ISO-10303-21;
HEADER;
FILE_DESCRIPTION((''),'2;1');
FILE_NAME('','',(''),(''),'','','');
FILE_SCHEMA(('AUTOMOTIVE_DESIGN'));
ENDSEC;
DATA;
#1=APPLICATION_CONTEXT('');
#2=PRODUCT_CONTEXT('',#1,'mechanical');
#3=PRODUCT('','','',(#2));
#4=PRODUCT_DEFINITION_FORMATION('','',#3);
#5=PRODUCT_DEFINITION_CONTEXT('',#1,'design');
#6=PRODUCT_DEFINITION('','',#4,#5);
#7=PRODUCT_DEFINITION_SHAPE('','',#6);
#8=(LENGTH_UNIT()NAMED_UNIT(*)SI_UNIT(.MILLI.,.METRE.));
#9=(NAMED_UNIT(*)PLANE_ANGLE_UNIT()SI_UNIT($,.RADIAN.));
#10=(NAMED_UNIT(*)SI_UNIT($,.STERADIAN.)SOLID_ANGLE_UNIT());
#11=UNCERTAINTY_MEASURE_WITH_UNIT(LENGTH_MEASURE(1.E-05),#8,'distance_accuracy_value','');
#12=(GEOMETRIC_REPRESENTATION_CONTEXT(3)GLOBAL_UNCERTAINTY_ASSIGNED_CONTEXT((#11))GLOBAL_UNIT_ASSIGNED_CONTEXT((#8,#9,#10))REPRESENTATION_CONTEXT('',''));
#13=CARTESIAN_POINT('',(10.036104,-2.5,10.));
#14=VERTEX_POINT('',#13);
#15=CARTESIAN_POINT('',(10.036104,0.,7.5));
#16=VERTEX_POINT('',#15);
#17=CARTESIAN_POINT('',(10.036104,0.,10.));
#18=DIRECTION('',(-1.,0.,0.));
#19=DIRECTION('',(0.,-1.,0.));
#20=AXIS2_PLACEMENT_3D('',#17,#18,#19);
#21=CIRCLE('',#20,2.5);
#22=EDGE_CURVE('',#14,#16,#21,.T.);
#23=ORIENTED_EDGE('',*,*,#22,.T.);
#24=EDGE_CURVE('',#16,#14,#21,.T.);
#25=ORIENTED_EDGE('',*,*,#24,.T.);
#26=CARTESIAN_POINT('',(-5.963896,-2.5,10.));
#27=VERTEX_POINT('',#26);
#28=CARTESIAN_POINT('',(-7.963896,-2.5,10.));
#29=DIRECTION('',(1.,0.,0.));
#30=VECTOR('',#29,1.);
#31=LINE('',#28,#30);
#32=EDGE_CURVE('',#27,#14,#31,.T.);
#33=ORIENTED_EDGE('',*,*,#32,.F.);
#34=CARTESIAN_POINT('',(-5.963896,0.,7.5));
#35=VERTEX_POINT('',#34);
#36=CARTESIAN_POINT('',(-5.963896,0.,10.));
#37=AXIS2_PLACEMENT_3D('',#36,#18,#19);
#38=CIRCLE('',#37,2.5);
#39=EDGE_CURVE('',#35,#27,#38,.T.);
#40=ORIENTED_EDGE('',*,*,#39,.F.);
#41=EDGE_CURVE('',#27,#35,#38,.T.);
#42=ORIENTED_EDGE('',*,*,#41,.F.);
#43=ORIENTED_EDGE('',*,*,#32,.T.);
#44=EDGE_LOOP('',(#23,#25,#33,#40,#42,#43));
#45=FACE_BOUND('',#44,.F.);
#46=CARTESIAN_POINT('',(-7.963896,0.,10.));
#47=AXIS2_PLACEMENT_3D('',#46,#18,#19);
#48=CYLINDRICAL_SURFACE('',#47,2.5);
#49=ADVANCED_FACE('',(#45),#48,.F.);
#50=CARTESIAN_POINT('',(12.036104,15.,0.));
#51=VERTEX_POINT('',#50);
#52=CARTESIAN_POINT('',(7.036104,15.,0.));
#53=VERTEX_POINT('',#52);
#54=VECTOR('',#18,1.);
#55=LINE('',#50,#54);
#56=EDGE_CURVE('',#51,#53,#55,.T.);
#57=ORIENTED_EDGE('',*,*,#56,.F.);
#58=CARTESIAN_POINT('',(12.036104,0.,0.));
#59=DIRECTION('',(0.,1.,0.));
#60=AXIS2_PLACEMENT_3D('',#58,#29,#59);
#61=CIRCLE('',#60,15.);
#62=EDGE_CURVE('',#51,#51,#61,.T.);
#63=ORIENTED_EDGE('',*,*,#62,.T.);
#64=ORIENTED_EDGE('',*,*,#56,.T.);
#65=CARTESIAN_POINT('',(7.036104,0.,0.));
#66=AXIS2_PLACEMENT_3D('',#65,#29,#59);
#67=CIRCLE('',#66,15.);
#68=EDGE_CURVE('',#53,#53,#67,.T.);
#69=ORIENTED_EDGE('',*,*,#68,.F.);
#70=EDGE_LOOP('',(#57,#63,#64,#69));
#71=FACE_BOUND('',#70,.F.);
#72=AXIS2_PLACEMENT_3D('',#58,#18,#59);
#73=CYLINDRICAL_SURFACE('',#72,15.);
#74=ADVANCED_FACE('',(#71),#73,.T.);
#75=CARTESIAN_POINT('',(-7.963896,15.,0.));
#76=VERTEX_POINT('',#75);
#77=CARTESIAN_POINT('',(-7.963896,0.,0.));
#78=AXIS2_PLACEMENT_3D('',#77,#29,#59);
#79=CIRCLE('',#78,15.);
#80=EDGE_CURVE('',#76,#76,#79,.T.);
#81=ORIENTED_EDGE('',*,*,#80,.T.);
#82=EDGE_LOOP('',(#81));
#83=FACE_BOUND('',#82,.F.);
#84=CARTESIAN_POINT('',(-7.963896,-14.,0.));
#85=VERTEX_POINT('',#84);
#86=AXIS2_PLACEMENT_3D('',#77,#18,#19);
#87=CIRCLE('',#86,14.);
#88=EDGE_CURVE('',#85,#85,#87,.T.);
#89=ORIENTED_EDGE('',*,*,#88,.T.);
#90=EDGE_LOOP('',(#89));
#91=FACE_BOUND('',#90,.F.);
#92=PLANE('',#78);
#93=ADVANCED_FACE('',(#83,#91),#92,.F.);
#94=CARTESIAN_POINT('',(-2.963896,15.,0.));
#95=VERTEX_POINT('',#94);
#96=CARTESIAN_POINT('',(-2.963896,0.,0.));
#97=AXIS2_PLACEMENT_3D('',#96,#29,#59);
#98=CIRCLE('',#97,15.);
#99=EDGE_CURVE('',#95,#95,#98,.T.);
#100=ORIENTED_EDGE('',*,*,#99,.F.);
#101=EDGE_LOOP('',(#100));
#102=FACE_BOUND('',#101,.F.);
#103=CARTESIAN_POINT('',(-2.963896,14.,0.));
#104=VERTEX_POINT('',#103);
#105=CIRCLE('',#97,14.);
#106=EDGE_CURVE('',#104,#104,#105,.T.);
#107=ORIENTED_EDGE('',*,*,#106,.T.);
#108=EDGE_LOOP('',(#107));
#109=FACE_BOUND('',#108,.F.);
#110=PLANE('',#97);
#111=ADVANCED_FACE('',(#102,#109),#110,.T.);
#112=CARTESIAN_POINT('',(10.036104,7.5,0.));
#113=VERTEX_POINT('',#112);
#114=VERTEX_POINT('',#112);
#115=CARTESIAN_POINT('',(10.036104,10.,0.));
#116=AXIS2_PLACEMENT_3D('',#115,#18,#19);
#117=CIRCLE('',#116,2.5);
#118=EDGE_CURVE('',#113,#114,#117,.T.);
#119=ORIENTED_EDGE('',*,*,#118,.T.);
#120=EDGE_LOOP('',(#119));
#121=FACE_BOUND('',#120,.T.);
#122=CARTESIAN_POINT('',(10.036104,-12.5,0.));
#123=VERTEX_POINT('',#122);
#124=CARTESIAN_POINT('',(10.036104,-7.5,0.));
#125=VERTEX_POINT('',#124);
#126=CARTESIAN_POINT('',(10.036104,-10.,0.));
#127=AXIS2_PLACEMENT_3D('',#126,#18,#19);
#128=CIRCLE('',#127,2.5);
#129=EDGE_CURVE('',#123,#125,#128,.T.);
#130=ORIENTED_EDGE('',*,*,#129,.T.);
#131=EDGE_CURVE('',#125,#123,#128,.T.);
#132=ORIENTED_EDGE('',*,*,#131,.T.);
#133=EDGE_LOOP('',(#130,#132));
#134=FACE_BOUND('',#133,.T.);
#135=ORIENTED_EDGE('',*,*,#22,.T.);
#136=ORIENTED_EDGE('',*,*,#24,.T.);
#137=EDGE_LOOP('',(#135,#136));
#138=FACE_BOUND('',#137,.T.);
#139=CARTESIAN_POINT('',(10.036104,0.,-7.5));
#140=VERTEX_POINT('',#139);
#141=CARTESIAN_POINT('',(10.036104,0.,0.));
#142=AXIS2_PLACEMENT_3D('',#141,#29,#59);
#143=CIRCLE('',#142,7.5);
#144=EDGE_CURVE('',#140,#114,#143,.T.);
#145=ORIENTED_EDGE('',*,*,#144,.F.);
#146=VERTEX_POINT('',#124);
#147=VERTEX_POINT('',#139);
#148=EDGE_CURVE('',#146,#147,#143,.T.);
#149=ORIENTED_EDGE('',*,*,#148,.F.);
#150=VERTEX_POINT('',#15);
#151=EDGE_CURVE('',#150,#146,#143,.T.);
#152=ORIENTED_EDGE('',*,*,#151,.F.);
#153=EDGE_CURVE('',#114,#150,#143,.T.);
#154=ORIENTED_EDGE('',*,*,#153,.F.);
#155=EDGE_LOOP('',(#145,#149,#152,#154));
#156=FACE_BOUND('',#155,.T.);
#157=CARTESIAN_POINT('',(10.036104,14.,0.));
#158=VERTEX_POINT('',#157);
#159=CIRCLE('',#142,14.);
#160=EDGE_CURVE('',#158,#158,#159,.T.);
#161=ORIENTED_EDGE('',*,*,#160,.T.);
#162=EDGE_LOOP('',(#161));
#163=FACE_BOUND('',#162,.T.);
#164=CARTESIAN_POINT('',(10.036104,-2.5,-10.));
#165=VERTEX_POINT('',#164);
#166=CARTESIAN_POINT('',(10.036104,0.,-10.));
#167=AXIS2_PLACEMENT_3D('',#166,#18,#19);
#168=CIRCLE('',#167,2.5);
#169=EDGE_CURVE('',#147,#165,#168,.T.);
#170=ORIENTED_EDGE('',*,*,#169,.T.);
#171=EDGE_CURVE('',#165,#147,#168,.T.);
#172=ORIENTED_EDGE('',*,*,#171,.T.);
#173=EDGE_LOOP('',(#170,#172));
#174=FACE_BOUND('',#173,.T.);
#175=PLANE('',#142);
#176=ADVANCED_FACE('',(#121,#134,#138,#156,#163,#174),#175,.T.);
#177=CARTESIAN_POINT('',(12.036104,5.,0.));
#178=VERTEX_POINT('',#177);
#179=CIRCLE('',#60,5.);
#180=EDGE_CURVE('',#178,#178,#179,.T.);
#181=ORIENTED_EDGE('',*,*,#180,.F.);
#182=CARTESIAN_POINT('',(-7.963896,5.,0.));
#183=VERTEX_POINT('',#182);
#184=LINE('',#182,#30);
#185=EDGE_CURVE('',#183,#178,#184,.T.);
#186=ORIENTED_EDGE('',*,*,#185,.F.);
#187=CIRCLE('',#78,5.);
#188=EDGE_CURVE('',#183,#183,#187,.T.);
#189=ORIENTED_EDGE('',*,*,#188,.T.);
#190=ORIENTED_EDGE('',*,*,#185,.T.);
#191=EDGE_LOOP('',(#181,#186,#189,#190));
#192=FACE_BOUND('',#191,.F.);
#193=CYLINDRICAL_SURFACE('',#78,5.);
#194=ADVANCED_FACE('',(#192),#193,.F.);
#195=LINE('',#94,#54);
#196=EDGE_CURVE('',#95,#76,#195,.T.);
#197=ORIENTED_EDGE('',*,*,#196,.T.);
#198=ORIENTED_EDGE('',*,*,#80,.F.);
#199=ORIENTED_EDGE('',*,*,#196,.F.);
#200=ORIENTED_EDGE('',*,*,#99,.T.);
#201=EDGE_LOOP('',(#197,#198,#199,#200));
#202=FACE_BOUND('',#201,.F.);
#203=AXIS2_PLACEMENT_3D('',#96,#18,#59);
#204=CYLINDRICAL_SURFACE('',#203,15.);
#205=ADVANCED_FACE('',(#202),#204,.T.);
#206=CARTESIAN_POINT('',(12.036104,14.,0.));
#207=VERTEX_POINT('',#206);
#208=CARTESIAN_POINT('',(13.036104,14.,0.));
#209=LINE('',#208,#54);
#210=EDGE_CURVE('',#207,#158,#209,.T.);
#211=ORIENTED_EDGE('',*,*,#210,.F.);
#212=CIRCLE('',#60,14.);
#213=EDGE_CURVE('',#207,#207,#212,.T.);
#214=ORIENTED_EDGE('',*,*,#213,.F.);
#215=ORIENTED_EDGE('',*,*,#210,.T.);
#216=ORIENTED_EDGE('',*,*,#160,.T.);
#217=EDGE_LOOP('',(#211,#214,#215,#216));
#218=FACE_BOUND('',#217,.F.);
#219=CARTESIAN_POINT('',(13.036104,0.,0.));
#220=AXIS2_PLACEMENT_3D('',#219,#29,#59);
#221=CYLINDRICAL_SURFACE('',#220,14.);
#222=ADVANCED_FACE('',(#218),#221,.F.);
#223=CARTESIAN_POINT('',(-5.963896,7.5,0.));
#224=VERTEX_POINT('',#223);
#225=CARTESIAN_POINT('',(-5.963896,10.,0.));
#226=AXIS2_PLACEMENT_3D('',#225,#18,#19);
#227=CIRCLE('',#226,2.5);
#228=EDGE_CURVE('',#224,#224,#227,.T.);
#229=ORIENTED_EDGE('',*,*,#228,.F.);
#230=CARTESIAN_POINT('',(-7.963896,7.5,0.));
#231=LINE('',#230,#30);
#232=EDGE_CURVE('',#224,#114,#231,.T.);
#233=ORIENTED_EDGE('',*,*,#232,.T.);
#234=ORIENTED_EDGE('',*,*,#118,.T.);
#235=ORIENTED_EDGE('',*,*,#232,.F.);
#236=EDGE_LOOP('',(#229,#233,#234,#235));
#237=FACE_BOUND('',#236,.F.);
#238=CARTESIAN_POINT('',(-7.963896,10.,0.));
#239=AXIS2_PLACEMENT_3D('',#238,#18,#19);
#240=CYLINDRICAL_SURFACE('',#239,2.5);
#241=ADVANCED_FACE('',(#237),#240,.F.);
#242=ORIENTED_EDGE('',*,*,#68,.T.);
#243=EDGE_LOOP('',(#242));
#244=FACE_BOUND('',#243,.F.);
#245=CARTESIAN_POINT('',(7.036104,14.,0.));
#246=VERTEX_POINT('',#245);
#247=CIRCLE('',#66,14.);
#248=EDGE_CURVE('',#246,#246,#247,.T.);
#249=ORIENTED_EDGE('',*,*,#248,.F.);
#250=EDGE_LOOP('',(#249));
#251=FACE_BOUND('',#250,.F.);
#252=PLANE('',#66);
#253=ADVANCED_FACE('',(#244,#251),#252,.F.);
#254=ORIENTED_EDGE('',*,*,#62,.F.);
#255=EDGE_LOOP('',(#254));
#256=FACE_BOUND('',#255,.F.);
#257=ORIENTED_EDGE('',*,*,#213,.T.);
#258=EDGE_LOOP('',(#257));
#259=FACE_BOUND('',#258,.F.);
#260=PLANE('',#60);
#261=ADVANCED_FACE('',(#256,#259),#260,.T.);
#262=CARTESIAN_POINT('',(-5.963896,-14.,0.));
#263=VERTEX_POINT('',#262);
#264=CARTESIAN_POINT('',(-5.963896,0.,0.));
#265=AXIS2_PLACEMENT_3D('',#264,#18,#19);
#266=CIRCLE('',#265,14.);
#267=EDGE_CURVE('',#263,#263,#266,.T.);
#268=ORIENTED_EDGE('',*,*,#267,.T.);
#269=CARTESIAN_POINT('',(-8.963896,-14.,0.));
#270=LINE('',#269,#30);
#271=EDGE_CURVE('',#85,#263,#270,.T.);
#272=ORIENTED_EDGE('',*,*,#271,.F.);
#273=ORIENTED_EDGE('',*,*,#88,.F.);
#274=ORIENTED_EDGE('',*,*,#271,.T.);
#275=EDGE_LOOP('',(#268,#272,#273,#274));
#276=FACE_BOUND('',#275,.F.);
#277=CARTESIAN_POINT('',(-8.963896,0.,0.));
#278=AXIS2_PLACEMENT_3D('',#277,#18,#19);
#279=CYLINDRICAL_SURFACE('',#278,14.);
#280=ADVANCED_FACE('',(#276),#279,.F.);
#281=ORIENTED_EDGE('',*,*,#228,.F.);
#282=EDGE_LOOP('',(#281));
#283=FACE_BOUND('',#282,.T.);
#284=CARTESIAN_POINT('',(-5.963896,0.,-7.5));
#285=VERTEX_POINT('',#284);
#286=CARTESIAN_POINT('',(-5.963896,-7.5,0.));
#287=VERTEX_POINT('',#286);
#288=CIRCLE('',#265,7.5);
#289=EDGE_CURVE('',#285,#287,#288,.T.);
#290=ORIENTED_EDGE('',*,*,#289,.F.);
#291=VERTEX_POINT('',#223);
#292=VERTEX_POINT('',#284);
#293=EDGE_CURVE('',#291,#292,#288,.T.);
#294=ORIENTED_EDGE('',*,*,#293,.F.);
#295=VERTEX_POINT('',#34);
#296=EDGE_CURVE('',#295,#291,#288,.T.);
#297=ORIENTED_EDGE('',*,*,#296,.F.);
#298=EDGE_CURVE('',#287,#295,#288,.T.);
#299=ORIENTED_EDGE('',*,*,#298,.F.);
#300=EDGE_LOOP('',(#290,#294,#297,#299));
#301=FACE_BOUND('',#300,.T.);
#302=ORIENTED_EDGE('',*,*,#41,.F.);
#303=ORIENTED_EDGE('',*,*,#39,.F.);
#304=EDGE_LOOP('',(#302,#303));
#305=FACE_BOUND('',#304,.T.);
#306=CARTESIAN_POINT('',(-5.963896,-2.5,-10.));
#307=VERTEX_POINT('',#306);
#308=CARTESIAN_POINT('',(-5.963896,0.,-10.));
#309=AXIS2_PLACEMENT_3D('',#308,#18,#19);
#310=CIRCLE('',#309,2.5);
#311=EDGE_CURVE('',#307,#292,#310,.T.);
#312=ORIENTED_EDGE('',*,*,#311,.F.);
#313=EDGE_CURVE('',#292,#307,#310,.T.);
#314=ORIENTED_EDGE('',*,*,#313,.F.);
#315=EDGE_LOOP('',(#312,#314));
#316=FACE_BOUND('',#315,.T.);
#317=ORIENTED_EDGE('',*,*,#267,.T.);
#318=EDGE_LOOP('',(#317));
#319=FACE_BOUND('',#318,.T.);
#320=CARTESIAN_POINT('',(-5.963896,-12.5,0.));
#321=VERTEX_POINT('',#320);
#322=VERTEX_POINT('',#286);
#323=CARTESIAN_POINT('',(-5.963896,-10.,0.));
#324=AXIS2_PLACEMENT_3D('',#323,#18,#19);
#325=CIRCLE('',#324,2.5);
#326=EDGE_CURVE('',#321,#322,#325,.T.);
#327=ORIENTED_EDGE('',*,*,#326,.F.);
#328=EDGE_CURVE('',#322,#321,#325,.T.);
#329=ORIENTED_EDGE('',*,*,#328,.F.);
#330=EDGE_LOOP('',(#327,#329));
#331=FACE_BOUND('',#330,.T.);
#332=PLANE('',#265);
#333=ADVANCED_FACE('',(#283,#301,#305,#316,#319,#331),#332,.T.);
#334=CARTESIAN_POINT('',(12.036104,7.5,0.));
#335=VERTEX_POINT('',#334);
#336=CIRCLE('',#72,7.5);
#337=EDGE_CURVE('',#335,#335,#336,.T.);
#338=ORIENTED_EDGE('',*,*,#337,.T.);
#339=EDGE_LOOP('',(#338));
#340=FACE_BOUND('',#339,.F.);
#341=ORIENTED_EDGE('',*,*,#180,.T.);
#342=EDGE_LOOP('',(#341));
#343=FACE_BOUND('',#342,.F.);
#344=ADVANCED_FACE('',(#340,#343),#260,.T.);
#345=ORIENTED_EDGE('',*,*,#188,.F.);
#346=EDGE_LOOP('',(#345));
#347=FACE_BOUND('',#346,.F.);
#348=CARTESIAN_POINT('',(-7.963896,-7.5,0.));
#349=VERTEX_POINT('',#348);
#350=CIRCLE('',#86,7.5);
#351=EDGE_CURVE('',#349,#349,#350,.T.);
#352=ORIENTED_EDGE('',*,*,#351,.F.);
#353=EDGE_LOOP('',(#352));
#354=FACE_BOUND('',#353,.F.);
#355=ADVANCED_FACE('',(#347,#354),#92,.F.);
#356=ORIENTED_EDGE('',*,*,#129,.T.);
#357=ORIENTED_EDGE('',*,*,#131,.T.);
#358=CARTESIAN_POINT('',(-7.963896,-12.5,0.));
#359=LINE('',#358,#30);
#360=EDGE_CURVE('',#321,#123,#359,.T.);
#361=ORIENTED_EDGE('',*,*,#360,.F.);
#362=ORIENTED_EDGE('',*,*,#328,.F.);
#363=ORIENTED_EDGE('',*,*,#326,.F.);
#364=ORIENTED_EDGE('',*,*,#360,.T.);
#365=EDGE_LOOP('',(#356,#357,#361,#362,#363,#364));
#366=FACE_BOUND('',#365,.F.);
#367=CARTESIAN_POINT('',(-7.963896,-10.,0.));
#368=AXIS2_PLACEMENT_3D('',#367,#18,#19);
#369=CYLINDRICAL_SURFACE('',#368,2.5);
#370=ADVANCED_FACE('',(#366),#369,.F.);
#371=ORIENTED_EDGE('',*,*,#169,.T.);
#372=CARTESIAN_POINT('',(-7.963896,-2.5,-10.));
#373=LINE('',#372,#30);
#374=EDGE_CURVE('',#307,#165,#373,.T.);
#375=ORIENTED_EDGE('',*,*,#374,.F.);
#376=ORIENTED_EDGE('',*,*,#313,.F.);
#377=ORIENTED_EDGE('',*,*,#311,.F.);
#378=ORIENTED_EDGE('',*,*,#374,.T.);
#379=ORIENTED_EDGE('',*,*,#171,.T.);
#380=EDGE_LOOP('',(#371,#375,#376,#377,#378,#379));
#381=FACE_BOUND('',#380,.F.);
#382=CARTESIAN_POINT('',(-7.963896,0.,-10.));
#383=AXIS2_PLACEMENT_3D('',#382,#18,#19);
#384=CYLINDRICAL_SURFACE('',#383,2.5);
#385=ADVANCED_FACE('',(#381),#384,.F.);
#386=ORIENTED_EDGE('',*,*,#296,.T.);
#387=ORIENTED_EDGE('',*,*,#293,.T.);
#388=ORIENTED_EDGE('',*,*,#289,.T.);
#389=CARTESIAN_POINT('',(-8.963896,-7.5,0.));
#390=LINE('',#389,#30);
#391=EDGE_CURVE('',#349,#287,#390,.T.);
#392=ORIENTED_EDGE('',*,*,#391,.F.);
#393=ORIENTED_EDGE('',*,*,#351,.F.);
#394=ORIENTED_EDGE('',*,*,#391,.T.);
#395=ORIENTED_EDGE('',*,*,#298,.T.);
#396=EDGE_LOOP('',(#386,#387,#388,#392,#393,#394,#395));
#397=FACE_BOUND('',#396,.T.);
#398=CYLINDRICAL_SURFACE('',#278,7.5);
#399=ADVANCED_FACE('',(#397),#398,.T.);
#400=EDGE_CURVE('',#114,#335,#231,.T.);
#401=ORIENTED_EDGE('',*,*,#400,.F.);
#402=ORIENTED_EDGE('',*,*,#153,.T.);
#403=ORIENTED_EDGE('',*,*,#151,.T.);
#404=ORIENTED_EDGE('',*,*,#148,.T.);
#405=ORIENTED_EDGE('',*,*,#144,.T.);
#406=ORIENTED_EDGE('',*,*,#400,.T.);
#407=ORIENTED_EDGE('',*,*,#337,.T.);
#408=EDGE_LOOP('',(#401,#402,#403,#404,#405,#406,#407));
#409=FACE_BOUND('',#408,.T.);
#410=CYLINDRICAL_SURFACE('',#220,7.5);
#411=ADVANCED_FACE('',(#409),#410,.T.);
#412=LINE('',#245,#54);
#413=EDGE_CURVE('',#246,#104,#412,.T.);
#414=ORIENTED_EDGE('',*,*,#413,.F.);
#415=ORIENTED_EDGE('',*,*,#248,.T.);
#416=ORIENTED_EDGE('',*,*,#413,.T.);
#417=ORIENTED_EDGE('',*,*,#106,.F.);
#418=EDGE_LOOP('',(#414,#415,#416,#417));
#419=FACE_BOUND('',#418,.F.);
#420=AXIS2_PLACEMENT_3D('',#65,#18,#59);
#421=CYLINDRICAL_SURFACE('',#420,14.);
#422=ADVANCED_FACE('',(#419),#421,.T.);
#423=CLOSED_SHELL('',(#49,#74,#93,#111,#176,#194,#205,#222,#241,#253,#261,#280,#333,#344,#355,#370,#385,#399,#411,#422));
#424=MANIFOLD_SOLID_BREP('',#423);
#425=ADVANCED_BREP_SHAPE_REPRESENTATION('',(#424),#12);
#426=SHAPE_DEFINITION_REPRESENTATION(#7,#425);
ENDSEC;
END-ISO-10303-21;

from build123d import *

# Parameters (mm, degrees)
F2_R     = 2.5
F3_DEPTH = 20.001
F5_R     = 14
F5_R_2   = 7.5
F6_DEPTH = 3
F8_R     = 14
F8_R_2   = 7.5
F9_DEPTH = 3


with BuildPart() as f1:
    # F0 (on Top) → F1 (revolve)
    with BuildSketch(Plane.XY):
        Polygon((12.0361039788, 5), (12.0361039788, 15), (7.0361039788, 15), (7.0361039788, 14), (-2.9638960212, 14), (-2.9638960212, 15), (-7.9638960212, 15), (-7.9638960212, 5), align=None)
    revolve(axis=Axis((-2.1188026294, 0, 0), (1, 0, 0)))

    # F2 (on face) → F3 (cut, through all)
    with BuildSketch(Plane(origin=(-7.9638960212, 0, 0), x_dir=(0, -1, 0), z_dir=(-1, 0, 0))):
        with Locations((-10, 0)):
            Circle(F2_R)
        with Locations((10, 0)):
            Circle(F2_R)
        with Locations((0, 10)):
            Circle(F2_R)
        with Locations((0, -10)):
            Circle(F2_R)
    extrude(amount=-F3_DEPTH, mode=Mode.SUBTRACT)

    # F5 (on offset) → F6 (cut)
    with BuildSketch(Plane(origin=(-8.9638960212, 0, 0), x_dir=(0, -1, 0), z_dir=(-1, 0, 0))):
        Circle(F5_R)
        Circle(F5_R_2, mode=Mode.SUBTRACT)
    extrude(amount=-F6_DEPTH, mode=Mode.SUBTRACT)

    # F8 (on offset) → F9 (cut)
    with BuildSketch(Plane.YZ.offset(13.0361039788)):
        Circle(F8_R)
        Circle(F8_R_2, mode=Mode.SUBTRACT)
    extrude(amount=-F9_DEPTH, mode=Mode.SUBTRACT)


solid = f1.part
